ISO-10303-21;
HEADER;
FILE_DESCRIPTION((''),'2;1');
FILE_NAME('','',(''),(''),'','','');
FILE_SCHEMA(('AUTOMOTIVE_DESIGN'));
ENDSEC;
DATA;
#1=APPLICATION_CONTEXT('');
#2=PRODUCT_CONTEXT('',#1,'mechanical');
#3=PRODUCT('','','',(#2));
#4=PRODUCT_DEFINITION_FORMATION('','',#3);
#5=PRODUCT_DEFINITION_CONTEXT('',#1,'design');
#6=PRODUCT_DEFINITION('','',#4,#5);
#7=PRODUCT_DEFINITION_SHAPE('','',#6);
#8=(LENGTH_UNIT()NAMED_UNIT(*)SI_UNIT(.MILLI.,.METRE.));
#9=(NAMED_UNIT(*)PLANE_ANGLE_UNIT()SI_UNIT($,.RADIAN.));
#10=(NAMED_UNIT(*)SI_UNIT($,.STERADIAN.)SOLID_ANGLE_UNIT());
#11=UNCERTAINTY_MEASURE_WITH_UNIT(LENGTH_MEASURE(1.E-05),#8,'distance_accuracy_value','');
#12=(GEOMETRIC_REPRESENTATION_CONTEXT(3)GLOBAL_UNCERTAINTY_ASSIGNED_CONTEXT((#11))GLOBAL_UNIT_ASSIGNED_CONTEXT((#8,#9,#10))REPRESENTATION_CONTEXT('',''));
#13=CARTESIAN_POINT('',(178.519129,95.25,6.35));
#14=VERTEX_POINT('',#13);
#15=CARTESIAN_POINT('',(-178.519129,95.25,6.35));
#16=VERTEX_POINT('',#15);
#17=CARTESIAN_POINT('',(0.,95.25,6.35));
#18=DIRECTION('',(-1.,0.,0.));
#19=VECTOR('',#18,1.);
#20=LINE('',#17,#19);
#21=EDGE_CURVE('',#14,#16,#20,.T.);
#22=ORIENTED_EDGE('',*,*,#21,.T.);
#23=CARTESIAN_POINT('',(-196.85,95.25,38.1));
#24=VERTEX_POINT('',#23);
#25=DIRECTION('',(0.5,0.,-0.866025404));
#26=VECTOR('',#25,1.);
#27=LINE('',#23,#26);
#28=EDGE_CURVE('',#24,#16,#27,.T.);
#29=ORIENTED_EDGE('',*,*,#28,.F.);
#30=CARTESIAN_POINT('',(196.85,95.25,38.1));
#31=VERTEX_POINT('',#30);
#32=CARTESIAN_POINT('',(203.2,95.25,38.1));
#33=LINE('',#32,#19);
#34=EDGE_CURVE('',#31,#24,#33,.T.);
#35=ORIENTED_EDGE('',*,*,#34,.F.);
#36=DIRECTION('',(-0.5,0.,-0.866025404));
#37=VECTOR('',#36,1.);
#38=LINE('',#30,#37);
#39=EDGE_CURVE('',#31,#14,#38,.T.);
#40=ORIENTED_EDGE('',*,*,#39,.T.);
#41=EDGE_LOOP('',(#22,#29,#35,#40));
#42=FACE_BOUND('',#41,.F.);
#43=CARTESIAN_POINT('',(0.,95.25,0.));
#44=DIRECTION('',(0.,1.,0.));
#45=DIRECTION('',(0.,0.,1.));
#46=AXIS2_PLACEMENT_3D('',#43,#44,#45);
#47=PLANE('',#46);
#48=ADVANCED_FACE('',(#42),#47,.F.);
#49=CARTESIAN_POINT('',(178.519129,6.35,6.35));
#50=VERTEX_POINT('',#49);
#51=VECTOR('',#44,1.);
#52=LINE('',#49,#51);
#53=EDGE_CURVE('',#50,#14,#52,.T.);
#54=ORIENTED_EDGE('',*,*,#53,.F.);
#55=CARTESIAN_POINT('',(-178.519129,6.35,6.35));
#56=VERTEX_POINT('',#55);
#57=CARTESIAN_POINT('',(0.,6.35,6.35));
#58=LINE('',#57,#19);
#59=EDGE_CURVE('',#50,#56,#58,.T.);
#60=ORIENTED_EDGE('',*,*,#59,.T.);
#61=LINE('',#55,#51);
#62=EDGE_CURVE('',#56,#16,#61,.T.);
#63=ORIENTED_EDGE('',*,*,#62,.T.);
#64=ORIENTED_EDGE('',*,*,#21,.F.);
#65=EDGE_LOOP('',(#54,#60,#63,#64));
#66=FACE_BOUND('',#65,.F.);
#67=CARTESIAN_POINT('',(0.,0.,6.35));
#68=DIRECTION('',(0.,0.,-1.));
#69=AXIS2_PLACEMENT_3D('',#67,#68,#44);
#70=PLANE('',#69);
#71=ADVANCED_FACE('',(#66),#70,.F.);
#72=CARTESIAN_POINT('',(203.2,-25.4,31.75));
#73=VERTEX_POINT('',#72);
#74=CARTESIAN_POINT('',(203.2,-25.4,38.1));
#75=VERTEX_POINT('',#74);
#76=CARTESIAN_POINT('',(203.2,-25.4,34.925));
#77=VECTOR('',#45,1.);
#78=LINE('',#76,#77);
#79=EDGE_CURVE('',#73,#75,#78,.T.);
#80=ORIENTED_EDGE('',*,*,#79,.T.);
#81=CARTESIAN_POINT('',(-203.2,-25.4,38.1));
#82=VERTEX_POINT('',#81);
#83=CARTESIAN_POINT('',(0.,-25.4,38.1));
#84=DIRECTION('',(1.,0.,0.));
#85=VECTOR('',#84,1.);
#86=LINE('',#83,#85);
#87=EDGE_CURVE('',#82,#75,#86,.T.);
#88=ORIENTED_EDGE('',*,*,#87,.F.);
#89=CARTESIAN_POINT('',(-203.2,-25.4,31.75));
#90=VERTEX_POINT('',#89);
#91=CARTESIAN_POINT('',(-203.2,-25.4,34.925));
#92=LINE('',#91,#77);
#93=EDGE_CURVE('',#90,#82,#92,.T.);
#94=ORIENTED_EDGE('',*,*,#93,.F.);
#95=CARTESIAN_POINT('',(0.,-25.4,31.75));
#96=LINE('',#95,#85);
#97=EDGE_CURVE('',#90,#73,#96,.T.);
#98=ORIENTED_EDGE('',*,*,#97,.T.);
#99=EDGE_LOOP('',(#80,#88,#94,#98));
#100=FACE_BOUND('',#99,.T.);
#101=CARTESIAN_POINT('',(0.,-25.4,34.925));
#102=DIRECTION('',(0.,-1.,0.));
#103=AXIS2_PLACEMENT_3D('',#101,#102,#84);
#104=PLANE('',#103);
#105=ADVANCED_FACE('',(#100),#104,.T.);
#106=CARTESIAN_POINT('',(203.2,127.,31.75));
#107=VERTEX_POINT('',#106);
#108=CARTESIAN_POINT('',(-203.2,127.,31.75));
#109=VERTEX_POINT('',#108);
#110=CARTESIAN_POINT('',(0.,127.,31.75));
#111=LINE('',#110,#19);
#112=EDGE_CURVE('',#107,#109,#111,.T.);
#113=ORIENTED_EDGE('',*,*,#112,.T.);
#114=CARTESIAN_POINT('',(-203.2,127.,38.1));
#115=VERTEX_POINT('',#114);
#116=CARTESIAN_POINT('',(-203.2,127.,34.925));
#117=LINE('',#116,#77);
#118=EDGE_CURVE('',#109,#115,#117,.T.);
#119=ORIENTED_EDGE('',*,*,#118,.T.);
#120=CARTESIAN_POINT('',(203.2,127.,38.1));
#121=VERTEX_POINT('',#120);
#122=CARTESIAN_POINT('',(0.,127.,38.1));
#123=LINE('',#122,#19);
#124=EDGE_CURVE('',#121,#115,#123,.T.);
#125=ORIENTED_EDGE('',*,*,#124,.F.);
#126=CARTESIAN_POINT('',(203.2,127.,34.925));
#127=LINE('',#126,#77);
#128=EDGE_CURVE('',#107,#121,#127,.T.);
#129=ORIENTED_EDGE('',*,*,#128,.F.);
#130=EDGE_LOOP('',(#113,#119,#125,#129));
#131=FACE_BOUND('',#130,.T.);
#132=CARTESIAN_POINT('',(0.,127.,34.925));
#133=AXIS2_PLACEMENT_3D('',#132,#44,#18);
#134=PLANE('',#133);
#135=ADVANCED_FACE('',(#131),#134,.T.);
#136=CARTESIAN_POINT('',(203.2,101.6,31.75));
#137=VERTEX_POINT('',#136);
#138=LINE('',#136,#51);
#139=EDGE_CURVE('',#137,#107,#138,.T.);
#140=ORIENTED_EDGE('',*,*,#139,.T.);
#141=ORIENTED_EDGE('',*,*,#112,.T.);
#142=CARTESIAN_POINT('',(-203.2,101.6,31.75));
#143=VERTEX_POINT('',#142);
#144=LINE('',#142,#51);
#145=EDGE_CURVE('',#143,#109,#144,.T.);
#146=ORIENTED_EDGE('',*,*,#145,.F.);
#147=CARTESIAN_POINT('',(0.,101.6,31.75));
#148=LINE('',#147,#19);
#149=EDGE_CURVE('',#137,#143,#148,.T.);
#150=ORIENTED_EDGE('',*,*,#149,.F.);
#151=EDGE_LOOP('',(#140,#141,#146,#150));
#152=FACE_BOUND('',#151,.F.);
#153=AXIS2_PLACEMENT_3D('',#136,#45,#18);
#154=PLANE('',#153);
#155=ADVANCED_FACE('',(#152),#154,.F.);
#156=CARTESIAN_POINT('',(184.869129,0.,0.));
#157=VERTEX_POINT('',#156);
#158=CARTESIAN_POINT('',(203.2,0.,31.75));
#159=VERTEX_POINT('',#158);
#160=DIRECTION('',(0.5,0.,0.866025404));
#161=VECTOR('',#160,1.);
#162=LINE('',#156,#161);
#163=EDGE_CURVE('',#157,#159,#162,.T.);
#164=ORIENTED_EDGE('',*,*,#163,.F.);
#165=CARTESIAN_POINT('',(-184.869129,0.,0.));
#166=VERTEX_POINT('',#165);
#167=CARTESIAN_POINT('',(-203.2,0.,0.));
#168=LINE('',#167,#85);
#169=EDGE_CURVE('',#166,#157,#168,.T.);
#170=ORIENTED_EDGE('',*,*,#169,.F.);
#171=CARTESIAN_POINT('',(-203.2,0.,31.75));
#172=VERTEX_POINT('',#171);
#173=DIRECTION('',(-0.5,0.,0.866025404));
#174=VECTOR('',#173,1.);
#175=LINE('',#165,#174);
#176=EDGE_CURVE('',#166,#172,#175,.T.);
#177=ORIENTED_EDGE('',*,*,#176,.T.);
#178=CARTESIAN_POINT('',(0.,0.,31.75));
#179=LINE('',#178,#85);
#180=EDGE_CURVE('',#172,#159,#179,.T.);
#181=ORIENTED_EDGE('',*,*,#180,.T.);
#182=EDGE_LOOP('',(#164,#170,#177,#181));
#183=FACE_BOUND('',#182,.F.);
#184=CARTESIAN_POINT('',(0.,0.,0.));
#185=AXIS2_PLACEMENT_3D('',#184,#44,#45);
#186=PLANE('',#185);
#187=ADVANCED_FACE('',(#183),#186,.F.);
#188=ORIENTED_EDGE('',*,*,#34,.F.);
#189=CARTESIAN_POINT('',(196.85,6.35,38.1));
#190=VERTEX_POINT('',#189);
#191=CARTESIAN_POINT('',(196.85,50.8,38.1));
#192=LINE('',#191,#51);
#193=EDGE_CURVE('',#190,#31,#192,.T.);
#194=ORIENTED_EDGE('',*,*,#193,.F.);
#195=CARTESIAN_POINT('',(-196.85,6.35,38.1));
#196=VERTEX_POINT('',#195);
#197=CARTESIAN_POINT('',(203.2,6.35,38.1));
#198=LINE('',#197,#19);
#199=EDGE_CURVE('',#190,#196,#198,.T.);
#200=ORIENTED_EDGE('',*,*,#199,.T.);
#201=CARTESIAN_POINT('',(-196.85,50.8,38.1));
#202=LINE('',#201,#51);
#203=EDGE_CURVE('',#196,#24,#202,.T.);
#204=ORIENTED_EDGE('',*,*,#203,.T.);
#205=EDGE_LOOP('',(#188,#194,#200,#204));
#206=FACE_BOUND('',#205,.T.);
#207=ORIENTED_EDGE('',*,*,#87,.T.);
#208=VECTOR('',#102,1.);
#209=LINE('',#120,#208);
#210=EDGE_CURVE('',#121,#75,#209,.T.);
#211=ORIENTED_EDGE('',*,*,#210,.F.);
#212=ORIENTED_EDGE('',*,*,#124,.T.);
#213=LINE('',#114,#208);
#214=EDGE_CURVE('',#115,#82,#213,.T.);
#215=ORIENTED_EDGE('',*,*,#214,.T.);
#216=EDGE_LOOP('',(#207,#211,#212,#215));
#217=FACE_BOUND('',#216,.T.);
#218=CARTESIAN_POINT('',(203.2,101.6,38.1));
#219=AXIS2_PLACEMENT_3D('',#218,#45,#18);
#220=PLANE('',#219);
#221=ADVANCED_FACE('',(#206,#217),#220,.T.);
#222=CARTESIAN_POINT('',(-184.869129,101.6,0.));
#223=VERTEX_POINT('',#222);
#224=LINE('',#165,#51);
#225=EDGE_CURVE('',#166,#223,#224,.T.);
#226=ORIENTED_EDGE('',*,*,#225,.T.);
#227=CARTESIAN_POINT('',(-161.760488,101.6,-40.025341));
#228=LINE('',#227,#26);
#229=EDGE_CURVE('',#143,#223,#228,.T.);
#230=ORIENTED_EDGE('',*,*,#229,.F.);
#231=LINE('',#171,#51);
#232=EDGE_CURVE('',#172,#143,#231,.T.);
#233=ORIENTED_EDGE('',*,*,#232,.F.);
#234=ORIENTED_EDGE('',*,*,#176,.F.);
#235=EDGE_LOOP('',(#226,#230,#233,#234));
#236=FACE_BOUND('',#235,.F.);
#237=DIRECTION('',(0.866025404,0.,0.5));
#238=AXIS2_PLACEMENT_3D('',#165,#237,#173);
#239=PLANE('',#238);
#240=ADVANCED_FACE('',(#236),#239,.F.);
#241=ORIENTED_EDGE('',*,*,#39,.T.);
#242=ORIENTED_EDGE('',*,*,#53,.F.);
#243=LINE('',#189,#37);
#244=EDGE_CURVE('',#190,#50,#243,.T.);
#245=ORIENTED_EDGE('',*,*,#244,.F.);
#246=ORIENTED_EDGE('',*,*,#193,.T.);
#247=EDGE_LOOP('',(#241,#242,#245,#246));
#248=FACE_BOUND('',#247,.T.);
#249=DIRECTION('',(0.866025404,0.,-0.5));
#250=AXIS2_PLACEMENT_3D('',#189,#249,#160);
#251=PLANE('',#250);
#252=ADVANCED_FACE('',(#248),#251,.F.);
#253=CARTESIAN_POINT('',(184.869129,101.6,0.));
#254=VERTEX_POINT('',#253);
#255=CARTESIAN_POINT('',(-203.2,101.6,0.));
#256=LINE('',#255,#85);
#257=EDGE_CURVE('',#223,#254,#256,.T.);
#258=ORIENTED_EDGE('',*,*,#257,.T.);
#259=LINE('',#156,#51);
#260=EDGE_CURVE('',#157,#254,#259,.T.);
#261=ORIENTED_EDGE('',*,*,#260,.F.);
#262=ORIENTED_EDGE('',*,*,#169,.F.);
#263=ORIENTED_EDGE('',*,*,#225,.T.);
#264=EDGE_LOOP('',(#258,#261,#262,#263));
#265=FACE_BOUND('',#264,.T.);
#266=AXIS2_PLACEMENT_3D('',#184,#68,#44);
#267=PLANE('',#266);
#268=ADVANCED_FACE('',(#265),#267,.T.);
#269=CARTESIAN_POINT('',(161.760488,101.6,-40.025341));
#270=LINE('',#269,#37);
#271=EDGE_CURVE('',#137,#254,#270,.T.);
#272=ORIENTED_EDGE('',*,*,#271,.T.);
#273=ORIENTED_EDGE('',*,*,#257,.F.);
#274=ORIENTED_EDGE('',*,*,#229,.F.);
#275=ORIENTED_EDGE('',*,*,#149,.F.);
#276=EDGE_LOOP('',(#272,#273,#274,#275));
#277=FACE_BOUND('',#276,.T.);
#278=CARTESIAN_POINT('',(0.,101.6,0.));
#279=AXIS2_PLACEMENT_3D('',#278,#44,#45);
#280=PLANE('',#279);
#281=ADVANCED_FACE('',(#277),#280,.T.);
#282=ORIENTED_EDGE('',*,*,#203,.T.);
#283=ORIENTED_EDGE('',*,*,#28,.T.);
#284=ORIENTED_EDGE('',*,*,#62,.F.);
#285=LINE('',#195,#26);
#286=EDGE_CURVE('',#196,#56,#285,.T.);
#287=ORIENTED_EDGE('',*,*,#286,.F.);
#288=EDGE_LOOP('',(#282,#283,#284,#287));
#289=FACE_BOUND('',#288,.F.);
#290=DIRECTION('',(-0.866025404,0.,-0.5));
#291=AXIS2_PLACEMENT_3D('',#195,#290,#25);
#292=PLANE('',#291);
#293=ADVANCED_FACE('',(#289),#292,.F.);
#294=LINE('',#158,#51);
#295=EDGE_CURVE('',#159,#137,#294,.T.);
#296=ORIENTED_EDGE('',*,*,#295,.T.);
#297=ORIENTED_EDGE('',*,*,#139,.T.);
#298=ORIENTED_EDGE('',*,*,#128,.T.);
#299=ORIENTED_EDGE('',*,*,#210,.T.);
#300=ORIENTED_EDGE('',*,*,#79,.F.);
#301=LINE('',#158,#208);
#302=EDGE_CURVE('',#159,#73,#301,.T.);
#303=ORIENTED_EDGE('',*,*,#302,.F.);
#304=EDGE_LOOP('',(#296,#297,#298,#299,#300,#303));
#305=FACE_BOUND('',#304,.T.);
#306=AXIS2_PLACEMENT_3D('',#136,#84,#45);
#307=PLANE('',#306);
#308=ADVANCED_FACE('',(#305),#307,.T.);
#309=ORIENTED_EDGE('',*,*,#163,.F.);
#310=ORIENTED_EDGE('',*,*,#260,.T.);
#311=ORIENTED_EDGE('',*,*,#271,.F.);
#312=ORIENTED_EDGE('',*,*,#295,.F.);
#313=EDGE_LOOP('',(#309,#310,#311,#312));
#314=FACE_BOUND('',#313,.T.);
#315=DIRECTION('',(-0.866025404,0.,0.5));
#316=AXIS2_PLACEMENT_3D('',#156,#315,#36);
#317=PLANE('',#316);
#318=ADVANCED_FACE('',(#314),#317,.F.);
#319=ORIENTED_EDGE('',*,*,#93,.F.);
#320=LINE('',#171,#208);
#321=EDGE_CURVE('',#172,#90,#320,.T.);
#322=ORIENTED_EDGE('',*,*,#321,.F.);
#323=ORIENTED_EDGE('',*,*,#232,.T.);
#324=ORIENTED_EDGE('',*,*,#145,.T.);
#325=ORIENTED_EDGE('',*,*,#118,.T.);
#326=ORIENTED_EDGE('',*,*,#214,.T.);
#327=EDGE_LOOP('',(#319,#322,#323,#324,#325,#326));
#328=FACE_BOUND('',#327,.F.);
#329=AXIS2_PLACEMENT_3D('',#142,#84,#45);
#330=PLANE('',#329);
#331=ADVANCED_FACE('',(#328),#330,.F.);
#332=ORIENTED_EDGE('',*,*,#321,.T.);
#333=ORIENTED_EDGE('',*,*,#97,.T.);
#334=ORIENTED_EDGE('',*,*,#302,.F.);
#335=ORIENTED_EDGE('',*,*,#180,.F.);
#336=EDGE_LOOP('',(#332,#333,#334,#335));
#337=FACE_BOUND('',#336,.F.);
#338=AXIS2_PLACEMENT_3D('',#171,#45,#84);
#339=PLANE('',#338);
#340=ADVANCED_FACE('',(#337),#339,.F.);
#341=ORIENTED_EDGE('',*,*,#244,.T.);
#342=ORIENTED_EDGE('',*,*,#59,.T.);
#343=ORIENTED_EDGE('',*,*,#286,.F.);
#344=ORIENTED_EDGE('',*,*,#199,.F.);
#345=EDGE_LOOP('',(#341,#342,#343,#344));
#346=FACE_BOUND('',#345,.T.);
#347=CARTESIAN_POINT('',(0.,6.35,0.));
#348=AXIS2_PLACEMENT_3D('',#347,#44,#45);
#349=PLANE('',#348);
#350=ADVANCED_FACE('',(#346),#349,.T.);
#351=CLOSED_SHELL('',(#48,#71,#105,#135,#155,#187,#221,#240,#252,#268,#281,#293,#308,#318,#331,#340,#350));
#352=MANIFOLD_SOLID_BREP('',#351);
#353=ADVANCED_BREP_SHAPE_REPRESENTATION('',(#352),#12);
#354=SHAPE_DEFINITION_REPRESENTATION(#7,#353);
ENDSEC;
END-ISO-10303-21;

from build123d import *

# Parameters (mm, degrees)
F0_W      = 101.6
F0_H      = 38.1
F1_DEPTH  = 203.2
F3_T      = -6.35
F2_W      = 406.4
F2_H      = 6.35
F4_DEPTH  = 25.4
F5_W      = 406.4
F5_H      = 6.35
F6_DEPTH  = 25.4
F8_DEPTH  = 88.9
F10_DEPTH = 141.224


# Not quite as in the source:
# - a pattern or mirror of a feature is missing from the dataset's text; its kind, count and spacing are read off the source's solid


with BuildPart() as f1:
    # F0 (on Right) → F1 (new body, symmetric)
    with BuildSketch(Plane.YZ):
        with Locations((50.8, 19.05)):
            Rectangle(F0_W, F0_H)
    extrude(amount=F1_DEPTH, both=True)

    # F3
    f3_openings = [f1.faces().sort_by_distance(p)[0] for p in [
        (0, 50.8, 38.1),
    ]]
    offset(amount=F3_T, openings=f3_openings)

    # F2 (on face) → F4 (join)
    with BuildSketch(Plane.XZ):
        with Locations((0, 34.925)):
            Rectangle(F2_W, F2_H)
    extrude(amount=F4_DEPTH)

    # F5 (on face) → F6 (join)
    with BuildSketch(Plane(origin=(0, 101.6, 0), x_dir=(-1, 0, 0), z_dir=(0, 1, 0))):
        with Locations((0, 34.925)):
            Rectangle(F5_W, F5_H)
    extrude(amount=F6_DEPTH)

    # F7 (on face) → F8 (join, through all)
    with BuildSketch(Plane(origin=(0, 6.35, 0), x_dir=(-1, 0, 0), z_dir=(0, 1, 0))):
        Polygon((196.85, 6.35), (196.85, 38.1), (178.5191289532, 6.35), align=None)
    f8 = extrude(amount=F8_DEPTH)

    # F8_copies: F8 across plane
    add(f8.mirror(Plane(origin=(0, 0, 0), x_dir=(0, 0, 1), z_dir=(1, 0, 0))))

    # F9 (on Front) → F10 (cut)
    with BuildSketch(Plane.XZ):
        Polygon((-184.8691289532, 0), (-203.2, 31.75), (-203.2, 0), align=None)
    f10 = extrude(amount=-F10_DEPTH, mode=Mode.SUBTRACT)

    # F10_copies: F10 across plane
    add(f10.mirror(Plane(origin=(0, 0, 0), x_dir=(0, 0, 1), z_dir=(1, 0, 0))), mode=Mode.SUBTRACT)


solid = f1.part
